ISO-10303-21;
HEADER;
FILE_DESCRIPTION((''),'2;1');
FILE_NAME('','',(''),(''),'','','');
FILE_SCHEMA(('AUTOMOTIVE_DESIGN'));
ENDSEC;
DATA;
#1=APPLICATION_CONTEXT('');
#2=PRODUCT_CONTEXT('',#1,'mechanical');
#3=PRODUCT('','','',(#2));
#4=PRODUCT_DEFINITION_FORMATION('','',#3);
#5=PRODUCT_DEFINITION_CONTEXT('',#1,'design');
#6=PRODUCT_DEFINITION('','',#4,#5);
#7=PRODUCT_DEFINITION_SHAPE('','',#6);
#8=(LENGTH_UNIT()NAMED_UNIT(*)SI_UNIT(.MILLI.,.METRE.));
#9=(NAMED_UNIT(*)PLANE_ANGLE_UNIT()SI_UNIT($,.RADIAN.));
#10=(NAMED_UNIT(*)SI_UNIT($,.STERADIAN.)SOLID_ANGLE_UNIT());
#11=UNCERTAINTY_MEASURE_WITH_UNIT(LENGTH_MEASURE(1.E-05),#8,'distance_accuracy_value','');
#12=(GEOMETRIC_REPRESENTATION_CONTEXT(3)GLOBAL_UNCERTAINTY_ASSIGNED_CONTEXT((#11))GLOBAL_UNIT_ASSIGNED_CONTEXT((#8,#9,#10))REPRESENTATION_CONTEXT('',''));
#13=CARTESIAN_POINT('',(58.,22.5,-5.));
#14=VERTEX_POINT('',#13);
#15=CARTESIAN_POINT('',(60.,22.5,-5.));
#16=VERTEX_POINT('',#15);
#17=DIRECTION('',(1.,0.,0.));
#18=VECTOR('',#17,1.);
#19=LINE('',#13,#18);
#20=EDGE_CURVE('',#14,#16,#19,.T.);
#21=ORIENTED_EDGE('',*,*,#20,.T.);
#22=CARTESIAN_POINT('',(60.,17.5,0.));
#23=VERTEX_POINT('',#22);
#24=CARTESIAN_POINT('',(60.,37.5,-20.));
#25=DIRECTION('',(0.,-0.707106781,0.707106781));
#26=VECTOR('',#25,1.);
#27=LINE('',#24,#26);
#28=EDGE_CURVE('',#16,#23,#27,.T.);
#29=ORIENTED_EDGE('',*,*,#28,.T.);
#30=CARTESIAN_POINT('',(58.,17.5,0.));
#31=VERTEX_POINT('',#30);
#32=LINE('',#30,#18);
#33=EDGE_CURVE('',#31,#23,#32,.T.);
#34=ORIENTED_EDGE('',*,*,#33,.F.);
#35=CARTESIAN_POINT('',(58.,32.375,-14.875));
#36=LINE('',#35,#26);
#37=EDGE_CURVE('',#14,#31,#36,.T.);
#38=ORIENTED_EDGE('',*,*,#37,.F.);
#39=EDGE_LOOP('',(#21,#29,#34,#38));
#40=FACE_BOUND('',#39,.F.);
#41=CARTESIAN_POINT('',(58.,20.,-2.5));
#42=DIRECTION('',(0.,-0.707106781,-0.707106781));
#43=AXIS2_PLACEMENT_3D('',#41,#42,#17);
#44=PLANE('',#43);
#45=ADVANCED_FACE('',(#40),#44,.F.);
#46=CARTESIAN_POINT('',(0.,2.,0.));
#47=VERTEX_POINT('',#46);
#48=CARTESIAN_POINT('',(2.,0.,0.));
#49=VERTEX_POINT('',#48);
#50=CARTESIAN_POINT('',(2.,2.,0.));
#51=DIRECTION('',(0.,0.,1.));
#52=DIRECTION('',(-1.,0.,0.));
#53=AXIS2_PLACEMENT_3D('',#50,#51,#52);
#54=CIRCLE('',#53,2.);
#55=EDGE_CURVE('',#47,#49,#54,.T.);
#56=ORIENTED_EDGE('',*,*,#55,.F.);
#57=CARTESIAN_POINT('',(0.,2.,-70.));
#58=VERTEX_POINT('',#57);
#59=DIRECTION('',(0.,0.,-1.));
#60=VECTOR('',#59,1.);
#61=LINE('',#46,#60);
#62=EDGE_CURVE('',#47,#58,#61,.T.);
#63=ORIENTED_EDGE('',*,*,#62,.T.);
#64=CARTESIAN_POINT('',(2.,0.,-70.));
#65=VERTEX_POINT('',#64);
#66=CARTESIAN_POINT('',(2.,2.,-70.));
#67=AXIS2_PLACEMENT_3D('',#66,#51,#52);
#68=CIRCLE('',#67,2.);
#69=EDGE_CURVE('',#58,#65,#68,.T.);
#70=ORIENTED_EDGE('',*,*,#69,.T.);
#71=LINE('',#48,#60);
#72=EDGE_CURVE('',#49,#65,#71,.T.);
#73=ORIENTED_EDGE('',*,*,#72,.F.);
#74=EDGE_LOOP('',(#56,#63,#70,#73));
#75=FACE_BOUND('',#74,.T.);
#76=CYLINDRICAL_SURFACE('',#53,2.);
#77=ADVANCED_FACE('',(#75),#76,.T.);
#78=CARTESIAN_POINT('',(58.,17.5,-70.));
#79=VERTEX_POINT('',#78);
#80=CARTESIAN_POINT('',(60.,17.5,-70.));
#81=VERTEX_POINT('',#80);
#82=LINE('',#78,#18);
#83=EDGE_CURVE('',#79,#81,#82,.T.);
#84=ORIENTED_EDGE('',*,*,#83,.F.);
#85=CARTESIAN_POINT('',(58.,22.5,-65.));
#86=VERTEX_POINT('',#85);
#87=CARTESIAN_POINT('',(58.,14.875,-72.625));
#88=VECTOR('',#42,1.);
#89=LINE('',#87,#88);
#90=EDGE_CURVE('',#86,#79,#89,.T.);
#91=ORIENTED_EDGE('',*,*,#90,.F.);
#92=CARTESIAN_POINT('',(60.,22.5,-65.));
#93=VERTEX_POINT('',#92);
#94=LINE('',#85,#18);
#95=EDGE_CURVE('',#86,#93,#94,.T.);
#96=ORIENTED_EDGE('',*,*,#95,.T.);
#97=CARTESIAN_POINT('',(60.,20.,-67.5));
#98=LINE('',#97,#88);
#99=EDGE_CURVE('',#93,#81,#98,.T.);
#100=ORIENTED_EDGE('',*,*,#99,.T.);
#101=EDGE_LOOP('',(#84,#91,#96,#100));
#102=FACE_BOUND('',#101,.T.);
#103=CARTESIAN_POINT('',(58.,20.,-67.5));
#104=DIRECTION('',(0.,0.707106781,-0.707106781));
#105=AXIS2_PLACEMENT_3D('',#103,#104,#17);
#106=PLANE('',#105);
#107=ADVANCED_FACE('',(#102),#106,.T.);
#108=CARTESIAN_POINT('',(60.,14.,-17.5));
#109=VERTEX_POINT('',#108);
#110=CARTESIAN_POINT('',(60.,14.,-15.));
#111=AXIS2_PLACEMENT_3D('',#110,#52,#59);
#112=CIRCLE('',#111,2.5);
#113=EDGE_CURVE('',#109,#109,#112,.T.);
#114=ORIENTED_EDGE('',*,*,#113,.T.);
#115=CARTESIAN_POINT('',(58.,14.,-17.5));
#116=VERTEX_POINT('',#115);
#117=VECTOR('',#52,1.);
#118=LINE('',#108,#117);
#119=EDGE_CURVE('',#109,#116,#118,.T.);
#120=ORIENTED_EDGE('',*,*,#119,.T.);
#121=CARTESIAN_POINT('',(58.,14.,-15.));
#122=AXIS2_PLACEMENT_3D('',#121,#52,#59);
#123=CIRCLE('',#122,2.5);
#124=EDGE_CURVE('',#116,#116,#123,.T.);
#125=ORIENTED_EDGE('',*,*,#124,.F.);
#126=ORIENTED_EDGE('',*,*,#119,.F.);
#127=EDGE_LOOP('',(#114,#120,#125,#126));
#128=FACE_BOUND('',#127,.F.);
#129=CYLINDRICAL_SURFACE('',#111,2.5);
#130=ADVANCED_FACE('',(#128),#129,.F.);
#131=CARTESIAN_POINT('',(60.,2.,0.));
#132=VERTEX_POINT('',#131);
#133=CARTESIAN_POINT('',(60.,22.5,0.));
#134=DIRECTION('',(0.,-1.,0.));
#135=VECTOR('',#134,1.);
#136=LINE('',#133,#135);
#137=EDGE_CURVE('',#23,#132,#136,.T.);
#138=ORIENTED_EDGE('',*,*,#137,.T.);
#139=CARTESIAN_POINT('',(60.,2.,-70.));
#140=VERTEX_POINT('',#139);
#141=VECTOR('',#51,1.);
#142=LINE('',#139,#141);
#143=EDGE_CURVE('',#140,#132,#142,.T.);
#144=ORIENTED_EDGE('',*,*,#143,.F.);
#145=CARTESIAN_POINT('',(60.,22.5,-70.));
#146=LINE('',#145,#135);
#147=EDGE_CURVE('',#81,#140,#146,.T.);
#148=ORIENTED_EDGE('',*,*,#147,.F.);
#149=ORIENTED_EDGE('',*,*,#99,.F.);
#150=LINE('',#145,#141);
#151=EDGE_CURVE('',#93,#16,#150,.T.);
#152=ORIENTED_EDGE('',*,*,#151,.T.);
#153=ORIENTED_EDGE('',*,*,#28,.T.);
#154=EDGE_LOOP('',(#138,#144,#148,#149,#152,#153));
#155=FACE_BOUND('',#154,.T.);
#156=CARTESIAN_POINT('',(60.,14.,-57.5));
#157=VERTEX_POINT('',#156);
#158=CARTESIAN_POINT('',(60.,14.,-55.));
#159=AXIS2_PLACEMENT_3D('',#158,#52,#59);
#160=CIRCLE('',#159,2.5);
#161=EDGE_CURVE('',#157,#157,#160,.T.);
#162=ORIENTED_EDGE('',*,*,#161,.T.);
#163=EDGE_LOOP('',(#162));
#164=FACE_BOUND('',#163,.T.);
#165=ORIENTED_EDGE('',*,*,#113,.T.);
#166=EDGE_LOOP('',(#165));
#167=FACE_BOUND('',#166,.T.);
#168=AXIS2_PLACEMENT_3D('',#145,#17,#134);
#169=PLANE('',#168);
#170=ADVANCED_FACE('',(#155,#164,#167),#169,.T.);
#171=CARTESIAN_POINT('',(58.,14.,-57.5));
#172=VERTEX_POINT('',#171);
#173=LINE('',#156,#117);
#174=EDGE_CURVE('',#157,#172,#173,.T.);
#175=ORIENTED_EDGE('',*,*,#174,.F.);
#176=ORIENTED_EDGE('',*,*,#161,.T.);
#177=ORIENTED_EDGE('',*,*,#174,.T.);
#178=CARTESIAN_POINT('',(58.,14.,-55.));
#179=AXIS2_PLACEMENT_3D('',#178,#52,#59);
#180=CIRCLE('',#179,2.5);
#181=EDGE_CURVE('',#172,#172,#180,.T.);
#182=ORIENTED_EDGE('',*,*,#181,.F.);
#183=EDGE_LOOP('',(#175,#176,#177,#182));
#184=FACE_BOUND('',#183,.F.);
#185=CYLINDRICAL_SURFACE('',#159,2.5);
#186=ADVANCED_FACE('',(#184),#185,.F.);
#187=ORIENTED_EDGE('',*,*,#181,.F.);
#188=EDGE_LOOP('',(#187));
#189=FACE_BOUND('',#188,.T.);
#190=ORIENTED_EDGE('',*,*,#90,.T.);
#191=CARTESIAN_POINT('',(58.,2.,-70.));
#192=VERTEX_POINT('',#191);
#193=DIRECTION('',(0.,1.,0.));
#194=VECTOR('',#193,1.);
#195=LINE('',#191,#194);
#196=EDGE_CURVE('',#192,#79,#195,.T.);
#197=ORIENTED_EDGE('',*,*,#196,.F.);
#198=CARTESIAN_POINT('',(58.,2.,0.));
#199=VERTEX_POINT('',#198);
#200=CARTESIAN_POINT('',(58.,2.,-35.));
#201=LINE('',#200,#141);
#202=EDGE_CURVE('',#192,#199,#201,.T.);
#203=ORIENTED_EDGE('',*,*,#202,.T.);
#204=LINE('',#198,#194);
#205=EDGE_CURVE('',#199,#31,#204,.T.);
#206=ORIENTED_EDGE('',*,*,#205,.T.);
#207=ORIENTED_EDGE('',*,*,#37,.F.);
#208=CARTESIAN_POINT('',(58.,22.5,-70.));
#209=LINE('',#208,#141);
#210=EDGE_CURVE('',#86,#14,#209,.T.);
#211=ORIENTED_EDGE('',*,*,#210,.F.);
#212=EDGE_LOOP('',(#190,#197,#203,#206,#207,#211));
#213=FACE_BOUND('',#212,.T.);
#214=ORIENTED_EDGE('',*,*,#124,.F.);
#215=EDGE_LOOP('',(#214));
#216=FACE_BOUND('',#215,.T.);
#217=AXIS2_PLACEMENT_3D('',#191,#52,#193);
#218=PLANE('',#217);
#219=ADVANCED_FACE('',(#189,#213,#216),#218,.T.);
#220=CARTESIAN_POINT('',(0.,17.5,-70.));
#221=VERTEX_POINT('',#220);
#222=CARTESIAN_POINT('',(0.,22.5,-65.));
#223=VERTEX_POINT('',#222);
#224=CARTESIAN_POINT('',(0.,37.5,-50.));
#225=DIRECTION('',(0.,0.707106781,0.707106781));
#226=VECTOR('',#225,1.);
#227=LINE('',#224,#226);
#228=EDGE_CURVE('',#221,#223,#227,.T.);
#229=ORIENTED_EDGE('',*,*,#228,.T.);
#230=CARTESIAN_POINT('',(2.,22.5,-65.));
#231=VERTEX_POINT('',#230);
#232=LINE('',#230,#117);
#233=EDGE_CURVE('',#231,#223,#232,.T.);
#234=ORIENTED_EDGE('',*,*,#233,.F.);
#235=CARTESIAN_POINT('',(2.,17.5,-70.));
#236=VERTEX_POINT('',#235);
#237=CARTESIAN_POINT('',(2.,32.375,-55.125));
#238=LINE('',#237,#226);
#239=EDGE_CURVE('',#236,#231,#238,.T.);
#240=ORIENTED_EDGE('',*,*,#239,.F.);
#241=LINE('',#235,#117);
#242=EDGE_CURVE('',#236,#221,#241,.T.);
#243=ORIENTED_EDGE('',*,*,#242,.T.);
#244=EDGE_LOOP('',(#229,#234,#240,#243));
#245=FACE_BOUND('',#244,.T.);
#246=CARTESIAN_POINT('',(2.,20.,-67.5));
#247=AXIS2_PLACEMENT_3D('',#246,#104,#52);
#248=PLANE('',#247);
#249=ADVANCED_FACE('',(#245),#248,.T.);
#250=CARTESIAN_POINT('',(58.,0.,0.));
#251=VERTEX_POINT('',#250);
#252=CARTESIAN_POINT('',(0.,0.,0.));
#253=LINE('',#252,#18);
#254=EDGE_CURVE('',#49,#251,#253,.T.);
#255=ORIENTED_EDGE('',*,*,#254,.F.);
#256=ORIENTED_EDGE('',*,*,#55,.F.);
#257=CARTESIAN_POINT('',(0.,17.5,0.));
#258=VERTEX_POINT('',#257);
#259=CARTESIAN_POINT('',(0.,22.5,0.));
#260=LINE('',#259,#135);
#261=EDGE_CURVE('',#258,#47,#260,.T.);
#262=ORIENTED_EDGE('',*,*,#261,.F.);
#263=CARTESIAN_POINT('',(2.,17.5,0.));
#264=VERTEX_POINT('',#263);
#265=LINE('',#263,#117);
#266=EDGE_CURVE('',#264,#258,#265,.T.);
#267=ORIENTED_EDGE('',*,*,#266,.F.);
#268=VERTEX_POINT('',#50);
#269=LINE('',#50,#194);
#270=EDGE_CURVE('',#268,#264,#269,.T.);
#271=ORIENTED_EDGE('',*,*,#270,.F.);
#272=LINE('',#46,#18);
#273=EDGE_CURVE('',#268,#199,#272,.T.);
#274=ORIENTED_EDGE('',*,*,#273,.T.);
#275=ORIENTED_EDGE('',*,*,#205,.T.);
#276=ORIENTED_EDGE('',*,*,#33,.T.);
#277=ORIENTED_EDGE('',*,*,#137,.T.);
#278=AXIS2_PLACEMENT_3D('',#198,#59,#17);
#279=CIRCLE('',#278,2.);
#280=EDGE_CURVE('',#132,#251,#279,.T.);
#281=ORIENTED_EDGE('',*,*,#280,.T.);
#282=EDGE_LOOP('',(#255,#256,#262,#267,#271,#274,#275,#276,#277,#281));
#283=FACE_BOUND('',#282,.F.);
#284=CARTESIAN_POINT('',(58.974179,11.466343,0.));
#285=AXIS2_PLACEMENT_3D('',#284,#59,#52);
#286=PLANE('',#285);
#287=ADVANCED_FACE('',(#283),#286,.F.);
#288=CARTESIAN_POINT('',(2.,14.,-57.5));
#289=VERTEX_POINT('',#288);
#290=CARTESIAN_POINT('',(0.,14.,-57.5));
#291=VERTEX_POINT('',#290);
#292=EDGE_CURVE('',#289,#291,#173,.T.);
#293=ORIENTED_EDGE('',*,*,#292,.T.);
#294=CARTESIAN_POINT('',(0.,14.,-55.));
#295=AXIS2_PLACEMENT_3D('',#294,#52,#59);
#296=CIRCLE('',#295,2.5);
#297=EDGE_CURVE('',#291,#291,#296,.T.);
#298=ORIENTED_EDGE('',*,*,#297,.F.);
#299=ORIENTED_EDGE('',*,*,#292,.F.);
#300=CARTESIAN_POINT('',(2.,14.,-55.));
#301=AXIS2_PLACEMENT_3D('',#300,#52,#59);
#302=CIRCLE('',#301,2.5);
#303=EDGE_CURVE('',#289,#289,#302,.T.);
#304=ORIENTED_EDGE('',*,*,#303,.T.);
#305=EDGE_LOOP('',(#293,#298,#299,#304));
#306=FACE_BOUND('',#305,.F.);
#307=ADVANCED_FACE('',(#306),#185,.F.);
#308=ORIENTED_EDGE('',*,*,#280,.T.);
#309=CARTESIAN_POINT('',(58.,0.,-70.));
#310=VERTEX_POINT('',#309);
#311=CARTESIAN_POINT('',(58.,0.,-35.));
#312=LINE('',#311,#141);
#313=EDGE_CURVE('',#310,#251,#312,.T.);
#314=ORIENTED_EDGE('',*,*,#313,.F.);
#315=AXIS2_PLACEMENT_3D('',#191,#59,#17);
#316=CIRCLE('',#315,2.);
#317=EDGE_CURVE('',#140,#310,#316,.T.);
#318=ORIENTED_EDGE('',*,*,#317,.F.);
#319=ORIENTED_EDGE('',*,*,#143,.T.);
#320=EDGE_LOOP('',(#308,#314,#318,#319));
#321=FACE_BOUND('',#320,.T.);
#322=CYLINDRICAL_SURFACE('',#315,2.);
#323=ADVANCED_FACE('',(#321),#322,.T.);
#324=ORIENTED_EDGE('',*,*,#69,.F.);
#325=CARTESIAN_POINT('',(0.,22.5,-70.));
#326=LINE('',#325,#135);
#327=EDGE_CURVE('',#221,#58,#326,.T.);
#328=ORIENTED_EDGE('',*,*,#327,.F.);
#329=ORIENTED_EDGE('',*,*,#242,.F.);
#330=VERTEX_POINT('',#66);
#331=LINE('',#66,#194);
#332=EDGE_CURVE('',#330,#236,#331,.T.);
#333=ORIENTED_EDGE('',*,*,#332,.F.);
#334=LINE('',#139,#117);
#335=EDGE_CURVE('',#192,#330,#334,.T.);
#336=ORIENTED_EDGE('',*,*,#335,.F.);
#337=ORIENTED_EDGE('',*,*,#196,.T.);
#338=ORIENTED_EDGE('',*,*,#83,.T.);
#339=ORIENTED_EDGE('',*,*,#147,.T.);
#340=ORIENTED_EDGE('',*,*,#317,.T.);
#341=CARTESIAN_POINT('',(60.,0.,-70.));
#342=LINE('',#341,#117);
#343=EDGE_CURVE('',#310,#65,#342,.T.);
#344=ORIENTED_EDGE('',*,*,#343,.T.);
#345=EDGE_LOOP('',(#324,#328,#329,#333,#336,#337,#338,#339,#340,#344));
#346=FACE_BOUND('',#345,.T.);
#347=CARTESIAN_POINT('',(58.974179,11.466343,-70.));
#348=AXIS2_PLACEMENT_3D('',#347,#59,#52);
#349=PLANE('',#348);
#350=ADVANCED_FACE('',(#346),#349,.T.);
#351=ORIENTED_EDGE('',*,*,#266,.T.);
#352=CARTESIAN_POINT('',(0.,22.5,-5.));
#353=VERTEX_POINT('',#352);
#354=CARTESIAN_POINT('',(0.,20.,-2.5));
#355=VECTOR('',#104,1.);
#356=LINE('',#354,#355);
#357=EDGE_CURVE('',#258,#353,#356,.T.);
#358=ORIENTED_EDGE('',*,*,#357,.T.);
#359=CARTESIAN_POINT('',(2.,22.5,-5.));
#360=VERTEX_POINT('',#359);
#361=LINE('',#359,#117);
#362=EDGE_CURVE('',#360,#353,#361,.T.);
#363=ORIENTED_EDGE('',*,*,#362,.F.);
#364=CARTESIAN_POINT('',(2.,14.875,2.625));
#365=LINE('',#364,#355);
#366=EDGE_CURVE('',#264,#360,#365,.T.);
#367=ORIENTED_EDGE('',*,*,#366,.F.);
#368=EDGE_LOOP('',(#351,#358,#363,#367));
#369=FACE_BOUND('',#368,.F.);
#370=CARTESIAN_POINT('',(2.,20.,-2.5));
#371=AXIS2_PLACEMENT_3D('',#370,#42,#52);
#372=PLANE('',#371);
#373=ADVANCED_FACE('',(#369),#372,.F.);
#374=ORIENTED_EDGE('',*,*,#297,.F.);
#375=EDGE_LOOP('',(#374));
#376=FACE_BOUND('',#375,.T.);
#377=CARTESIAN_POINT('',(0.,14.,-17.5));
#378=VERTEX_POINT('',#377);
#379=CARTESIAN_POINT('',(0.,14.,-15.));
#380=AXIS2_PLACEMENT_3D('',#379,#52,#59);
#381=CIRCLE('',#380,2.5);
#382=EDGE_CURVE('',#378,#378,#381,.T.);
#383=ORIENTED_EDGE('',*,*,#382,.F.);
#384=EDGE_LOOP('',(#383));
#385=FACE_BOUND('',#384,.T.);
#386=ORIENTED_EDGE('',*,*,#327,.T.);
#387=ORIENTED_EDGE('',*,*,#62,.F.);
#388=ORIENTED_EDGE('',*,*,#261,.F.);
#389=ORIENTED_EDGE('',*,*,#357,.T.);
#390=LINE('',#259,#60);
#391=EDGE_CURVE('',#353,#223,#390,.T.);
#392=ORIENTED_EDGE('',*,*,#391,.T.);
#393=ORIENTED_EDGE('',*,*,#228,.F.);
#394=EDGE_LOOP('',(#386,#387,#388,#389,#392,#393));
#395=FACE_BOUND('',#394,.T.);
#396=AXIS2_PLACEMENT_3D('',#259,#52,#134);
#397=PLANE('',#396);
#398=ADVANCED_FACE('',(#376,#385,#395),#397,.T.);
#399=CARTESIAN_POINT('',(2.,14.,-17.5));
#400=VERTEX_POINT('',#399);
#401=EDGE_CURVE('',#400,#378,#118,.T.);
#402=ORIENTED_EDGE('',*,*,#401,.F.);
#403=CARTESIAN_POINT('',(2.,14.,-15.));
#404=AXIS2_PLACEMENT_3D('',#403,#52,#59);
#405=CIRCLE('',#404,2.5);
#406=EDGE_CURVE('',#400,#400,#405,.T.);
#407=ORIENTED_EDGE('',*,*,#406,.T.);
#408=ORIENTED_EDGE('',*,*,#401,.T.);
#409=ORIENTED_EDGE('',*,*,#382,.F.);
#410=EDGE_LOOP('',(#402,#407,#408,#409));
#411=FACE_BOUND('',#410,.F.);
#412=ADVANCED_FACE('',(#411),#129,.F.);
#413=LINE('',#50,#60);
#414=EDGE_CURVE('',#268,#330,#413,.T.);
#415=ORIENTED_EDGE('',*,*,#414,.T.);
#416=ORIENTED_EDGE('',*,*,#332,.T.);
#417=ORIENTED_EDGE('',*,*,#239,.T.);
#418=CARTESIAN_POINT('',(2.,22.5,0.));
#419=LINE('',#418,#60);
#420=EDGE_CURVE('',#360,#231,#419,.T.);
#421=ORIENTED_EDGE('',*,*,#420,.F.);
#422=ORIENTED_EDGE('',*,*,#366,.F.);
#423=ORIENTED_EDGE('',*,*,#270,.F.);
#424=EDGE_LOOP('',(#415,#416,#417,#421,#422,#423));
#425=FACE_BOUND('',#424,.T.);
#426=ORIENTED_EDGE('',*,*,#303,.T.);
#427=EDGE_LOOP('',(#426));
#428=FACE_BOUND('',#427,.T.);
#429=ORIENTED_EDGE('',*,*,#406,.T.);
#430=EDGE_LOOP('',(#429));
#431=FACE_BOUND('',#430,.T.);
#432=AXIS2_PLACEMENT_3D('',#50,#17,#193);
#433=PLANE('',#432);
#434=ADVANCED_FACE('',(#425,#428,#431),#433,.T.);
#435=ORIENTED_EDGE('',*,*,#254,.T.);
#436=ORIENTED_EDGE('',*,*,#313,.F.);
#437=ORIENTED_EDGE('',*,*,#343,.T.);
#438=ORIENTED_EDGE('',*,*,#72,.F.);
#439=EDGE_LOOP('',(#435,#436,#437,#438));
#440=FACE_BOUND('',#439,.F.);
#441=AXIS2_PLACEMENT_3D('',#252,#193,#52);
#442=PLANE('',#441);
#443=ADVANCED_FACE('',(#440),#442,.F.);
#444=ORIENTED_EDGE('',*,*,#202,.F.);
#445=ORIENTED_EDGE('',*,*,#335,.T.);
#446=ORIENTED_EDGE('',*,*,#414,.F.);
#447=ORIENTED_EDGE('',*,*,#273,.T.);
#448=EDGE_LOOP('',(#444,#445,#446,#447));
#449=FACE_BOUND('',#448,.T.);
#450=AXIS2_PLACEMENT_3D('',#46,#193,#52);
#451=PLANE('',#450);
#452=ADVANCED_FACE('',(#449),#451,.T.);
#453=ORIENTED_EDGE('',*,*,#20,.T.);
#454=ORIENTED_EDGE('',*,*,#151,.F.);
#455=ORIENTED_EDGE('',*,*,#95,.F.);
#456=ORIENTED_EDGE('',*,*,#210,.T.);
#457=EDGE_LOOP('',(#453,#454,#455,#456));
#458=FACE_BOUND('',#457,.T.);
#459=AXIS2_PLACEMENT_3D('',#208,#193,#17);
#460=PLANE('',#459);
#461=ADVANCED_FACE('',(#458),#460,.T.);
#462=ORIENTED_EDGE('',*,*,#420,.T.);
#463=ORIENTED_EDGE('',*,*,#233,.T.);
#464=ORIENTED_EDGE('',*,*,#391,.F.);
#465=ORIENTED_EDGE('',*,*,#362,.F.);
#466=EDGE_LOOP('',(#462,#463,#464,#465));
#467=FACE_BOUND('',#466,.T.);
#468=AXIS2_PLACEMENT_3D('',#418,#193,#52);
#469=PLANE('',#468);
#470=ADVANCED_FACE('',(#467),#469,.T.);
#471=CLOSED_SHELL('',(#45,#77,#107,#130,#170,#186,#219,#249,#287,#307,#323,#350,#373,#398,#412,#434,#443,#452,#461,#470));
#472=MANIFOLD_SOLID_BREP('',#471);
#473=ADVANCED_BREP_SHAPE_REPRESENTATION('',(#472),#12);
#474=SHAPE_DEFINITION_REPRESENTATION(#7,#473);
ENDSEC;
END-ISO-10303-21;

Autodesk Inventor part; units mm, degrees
ref_plane "YZ Plane" through (0, 0, 0) normal (1, 0, 0) x (0, 1, 0)
ref_plane "XZ Plane" through (0, 0, 0) normal (0, 1, 0) x (-1, 0, 0)
ref_plane "XY Plane" through (0, 0, 0) normal (0, 0, 1) x (1, 0, 0)
sketch "草圖1" plane through (0, 0, 0) normal (0, 1, 0) x (-1, 0, 0)
  line L0 (0, 0) -> (-60, 0)
  line L1 (-60, 0) -> (-60, -70)
  line L2 (-60, -70) -> (0, -70)
  line L3 (0, -70) -> (0, 0)
  dimension "d0" = 60
  dimension "d1" = 70
extrude "平板1" add sketch "草圖1" along normal blind 2
sketch "草圖2" plane through (2, 0, 0) normal (-1, 0, 0) x (0, -1, 0)
  line L0 (0, -70) -> (0, 0)
  line L1 (0, 0) -> (-22.5, 0)
  line L2 (-22.5, 0) -> (-22.5, -70)
  line L3 (-22.5, -70) -> (0, -70)
edge flange "凸緣1" height 22.5 angle 90 thickness 2 bend radius 0 thickness toward (-1, 0, 0) relief straight relief width 2 relief depth 1 edges at (0, 2, -35) wall of the first edge with corners at (2, 0, -70) (2, 0, 0) (2, 22.5, 0) (2, 22.5, -70)
bend "折彎1"
corner "轉角1"
sketch "草圖3" plane through (58, 0, -70) normal (1, 0, 0) x (0, 1, 0)
  line L0 (0, 70) -> (0, 0)
  line L1 (0, 0) -> (22.5, 0)
  line L2 (22.5, 0) -> (22.5, 70)
  line L3 (22.5, 70) -> (0, 70)
edge flange "凸緣2" height 22.5 angle 90 thickness 2 bend radius 0 thickness toward (1, 0, 0) relief straight relief width 2 relief depth 1 edges at (60, 2, -35) wall of the first edge with corners at (58, 0, 0) (58, 0, -70) (58, 22.5, -70) (58, 22.5, 0)
bend "折彎2"
corner "轉角2"
chamfer "轉角倒角1" distance 5 angle 45 4 edges at (1, 22.5, -70) (1, 22.5, 0) (59, 22.5, -70) (59, 22.5, 0)
sketch "草圖4" plane through (60, 2.001, 0) normal (1, 0, 0) x (0, 0, -1)
  line L0 (15, 11.999) -> (55, 11.999)
  line L1 (70, -2.001) -> (0, -2.001) projected
  line L2 (0, 0) -> (0, 15.499) projected
  dimension "d26" = 40
  dimension "d27" = 14
  dimension "d28" = 15
hole "孔1" at (60, 14, -15) at (60, 14, -55) direction (-1, 0, 0) diameter 5 depth 80 tip angle 118
equation "\"d3\" = 折彎離隙寬度"
equation "\"d4\" = 折彎離隙深度"
equation "\"d5\" = 最小剩餘"
equation "\"d6\" = 折彎半徑"
equation "\"d10\" = 轉角離隙大小"
equation "\"d11\" = 間隙大小"
equation "\"d12\" = Jacobi半徑大小"
equation "\"d13\" = 折彎離隙寬度"
equation "\"d14\" = 折彎離隙深度"
equation "\"d15\" = 最小剩餘"
equation "\"d16\" = 折彎半徑"
equation "\"d20\" = 轉角離隙大小"
equation "\"d21\" = 間隙大小"
equation "\"d22\" = Jacobi半徑大小"
equation "\"折彎半徑\" = 厚度"
equation "\"折彎離隙寬度\" = 厚度"
equation "\"折彎離隙深度\" = 0.5 * 厚度"
equation "\"轉角離隙大小\" = 4 * 厚度"
equation "\"最小剩餘\" = 2 * 厚度"
equation "\"轉移半徑\" = 折彎半徑"
equation "\"Jacobi半徑大小\" = 厚度"
equation "\"間隙大小\" = 厚度"
equation "\"d2\" = 折彎半徑"
equation "\"厚度\" = 2"
properties part number "4-4"
